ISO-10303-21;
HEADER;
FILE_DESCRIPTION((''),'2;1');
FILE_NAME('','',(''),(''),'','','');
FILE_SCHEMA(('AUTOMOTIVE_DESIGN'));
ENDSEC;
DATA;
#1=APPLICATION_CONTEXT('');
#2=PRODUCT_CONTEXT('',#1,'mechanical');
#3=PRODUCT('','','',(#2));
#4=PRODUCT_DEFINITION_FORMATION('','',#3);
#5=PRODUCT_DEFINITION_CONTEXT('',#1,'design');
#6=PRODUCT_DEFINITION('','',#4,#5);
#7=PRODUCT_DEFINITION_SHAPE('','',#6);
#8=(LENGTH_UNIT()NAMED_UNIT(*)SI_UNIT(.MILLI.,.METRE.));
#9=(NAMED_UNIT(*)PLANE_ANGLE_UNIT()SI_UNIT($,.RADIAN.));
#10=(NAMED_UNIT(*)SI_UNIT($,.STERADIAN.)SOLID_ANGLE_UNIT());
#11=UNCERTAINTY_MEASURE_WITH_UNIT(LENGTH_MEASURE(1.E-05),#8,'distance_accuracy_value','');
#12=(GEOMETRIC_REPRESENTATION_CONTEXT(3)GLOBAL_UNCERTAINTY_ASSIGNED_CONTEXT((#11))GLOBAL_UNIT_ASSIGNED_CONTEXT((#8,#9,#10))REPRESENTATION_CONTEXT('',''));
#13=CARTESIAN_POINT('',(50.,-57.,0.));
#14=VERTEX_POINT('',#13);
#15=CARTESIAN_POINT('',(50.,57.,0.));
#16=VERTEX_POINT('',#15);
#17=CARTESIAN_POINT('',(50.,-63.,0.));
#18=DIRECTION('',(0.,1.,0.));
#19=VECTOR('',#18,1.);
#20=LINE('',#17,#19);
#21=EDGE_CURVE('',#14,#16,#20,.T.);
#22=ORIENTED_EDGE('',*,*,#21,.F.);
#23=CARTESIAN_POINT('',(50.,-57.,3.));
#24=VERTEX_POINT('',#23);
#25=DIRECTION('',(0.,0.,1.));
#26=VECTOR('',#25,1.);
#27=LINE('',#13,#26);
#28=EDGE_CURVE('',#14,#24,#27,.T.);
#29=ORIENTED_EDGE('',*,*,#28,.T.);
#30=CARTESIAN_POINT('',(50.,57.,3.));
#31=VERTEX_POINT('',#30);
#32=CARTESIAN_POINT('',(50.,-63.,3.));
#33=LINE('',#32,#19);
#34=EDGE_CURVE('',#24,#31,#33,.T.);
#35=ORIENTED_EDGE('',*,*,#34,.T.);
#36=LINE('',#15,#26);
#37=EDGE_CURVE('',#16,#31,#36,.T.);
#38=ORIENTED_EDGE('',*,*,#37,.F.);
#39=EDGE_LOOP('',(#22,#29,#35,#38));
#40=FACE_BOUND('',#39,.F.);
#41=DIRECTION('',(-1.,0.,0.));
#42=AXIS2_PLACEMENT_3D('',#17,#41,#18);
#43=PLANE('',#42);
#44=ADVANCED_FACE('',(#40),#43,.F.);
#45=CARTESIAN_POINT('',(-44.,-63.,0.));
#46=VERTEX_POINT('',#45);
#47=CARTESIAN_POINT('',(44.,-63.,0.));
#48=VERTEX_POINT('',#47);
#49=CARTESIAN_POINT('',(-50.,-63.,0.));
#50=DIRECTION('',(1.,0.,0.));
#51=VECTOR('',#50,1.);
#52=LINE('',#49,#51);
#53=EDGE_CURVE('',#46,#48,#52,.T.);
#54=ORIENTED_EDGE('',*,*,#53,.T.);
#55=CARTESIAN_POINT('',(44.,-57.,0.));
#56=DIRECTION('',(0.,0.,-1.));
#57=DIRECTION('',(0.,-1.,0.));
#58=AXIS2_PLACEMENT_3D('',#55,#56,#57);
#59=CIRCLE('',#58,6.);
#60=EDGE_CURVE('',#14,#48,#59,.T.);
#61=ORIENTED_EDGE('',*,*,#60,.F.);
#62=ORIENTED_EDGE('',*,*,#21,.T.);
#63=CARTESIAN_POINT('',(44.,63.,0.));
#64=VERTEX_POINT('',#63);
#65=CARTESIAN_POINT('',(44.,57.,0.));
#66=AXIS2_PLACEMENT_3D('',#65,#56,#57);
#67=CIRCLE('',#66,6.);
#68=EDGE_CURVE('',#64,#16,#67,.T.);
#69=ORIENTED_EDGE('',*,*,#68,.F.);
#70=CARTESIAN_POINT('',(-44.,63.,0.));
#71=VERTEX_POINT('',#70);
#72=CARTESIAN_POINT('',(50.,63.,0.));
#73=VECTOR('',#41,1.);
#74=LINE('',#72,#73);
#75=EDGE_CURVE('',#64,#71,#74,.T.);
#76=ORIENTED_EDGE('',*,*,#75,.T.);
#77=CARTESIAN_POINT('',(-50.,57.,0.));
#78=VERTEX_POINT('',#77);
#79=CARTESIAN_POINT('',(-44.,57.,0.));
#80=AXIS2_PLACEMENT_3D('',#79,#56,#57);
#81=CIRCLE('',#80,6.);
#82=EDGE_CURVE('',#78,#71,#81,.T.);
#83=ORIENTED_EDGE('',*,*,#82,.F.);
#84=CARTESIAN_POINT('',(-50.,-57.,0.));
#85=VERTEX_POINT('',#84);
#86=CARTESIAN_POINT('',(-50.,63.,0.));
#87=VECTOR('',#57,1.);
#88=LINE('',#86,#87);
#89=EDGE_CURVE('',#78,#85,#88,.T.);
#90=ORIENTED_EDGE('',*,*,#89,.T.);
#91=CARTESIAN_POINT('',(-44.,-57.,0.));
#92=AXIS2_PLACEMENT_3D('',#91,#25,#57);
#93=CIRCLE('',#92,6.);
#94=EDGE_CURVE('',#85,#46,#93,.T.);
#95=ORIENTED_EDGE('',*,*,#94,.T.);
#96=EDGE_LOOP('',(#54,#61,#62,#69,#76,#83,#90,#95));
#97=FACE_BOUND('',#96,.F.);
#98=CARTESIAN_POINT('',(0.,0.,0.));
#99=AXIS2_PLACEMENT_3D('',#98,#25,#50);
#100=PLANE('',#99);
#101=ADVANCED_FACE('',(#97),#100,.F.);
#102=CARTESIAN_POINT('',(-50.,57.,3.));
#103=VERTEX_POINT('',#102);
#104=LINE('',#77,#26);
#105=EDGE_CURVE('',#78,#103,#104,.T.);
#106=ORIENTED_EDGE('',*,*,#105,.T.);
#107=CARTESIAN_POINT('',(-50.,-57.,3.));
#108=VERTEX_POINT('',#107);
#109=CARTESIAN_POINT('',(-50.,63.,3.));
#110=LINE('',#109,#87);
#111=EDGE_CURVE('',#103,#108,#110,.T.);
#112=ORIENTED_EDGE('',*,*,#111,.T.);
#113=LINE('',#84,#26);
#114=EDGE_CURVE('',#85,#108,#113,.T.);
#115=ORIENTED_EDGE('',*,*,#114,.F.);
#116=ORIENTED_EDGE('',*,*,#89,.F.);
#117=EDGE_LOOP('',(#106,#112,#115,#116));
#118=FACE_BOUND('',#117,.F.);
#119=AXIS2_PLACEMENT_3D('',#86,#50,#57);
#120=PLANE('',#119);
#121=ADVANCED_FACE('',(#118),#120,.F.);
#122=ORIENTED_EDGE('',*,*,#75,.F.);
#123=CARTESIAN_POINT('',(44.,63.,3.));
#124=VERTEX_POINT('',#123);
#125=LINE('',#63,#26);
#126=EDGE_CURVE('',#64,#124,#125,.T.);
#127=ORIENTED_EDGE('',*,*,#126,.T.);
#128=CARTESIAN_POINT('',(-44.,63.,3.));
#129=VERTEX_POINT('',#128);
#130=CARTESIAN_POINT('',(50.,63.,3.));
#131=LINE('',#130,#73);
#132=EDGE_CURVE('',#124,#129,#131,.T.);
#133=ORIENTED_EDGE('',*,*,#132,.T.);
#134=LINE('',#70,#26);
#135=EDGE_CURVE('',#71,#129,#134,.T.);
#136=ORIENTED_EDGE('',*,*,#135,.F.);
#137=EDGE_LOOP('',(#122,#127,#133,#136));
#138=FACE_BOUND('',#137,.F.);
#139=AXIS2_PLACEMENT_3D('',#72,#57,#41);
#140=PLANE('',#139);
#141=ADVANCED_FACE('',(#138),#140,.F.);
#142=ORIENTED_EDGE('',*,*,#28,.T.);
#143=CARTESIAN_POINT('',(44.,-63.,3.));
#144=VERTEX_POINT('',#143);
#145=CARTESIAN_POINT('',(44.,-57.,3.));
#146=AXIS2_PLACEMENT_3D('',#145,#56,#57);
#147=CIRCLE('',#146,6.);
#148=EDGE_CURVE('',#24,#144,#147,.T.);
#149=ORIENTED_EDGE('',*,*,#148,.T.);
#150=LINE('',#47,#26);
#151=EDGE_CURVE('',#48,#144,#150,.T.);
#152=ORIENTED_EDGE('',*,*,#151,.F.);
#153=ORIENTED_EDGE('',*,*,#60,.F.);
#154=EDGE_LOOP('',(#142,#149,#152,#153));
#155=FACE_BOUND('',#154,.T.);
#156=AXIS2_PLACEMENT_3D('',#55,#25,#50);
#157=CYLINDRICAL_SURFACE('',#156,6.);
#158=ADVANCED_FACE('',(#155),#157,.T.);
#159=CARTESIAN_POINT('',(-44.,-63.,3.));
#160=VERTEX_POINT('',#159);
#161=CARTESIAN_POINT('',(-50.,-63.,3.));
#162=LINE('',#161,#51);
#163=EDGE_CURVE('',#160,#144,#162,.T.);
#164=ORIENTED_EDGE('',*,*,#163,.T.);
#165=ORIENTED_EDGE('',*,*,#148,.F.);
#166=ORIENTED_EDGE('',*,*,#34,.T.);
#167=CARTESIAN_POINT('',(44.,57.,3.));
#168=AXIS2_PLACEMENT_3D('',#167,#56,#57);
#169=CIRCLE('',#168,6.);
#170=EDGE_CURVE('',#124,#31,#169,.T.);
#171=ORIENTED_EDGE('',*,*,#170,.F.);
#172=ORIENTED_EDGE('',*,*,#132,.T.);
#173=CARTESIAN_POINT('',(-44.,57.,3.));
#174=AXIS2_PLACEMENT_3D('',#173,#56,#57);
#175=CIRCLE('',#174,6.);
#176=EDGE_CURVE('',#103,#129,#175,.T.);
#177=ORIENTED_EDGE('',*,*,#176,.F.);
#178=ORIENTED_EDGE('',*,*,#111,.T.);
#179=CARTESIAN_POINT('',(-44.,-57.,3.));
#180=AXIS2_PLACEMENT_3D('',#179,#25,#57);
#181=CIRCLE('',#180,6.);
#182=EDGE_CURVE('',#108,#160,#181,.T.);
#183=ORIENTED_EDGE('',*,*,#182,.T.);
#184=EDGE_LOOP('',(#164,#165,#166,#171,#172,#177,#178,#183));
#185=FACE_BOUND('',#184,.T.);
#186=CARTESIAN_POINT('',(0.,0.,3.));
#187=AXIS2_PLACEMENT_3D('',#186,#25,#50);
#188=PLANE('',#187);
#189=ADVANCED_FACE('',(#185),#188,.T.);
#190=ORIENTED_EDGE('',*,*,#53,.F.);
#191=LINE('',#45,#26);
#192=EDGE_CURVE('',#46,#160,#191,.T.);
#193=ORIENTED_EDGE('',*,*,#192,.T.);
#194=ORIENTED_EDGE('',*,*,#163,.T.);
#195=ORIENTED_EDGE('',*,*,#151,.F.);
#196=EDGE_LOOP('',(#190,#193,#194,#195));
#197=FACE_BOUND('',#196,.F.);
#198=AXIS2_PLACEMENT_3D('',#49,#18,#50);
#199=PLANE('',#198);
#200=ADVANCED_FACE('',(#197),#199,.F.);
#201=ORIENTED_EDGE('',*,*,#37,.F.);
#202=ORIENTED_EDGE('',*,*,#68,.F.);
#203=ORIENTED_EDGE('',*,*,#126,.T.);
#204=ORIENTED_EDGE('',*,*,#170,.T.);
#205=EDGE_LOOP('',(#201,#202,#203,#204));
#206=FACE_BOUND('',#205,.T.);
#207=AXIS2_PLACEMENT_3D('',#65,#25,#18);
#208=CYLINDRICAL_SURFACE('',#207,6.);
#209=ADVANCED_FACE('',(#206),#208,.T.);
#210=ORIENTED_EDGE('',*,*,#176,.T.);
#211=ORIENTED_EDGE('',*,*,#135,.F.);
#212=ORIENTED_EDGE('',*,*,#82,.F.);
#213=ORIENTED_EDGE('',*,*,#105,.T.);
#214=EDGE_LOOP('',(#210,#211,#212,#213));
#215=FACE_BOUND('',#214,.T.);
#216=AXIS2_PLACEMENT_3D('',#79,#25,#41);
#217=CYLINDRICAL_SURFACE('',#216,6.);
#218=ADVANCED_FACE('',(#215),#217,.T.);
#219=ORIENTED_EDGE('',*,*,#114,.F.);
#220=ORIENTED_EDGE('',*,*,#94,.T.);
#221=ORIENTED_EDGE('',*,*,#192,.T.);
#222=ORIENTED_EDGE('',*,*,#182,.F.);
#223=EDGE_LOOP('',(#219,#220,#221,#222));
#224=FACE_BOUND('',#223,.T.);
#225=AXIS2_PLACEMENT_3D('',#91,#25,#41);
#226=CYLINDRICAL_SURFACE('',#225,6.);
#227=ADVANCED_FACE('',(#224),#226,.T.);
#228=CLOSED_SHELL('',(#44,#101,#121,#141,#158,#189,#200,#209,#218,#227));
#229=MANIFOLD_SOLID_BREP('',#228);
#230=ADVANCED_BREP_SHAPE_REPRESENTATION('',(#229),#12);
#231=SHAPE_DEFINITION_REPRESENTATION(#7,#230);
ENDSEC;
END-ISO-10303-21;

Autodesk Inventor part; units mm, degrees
ref_plane "YZ Plane" through (0, 0, 0) normal (1, 0, 0) x (0, 1, 0)
ref_plane "XZ Plane" through (0, 0, 0) normal (0, 1, 0) x (-1, 0, 0)
ref_plane "XY Plane" through (0, 0, 0) normal (0, 0, 1) x (1, 0, 0)
sketch "Sketch1" plane through (0, 0, 0) normal (0, 0, 1) x (1, 0, 0)
  line L0 (-50, -63) -> (50, -63)
  line L1 (50, -63) -> (50, 63)
  line L2 (50, 63) -> (-50, 63)
  line L3 (-50, 63) -> (-50, -63)
  line L4 (-50, -63) -> (50, 63) construction
  line L5 (50, -63) -> (-50, 63) construction
  point P0 (0, 0)
  dimension "d0" = 100
  dimension "d1" = 126
extrude "Plate1" add sketch "Sketch1" along normal blind 3
fillet "Corner Round1" radius 6 4 edges at (50, -63, 1.5) (-50, -63, 1.5) (-50, 63, 1.5) (50, 63, 1.5)
equation "\"d2\" = Thickness"
equation "\"BendReliefWidth\" = Thickness"
equation "\"BendReliefDepth\" = 0.5 * Thickness"
equation "\"CornerReliefSize\" = 4 * Thickness"
equation "\"MinimumRemnant\" = 2 * Thickness"
equation "\"TransitionRadius\" = BendRadius"
equation "\"JacobiRadiusSize\" = BendRadius"
equation "\"GapSize\" = Thickness"
equation "\"Thickness\" = 3"
equation "\"BendRadius\" = 5"
properties part number "MSC 820 D-ring plate" material "Stainless Steel"
